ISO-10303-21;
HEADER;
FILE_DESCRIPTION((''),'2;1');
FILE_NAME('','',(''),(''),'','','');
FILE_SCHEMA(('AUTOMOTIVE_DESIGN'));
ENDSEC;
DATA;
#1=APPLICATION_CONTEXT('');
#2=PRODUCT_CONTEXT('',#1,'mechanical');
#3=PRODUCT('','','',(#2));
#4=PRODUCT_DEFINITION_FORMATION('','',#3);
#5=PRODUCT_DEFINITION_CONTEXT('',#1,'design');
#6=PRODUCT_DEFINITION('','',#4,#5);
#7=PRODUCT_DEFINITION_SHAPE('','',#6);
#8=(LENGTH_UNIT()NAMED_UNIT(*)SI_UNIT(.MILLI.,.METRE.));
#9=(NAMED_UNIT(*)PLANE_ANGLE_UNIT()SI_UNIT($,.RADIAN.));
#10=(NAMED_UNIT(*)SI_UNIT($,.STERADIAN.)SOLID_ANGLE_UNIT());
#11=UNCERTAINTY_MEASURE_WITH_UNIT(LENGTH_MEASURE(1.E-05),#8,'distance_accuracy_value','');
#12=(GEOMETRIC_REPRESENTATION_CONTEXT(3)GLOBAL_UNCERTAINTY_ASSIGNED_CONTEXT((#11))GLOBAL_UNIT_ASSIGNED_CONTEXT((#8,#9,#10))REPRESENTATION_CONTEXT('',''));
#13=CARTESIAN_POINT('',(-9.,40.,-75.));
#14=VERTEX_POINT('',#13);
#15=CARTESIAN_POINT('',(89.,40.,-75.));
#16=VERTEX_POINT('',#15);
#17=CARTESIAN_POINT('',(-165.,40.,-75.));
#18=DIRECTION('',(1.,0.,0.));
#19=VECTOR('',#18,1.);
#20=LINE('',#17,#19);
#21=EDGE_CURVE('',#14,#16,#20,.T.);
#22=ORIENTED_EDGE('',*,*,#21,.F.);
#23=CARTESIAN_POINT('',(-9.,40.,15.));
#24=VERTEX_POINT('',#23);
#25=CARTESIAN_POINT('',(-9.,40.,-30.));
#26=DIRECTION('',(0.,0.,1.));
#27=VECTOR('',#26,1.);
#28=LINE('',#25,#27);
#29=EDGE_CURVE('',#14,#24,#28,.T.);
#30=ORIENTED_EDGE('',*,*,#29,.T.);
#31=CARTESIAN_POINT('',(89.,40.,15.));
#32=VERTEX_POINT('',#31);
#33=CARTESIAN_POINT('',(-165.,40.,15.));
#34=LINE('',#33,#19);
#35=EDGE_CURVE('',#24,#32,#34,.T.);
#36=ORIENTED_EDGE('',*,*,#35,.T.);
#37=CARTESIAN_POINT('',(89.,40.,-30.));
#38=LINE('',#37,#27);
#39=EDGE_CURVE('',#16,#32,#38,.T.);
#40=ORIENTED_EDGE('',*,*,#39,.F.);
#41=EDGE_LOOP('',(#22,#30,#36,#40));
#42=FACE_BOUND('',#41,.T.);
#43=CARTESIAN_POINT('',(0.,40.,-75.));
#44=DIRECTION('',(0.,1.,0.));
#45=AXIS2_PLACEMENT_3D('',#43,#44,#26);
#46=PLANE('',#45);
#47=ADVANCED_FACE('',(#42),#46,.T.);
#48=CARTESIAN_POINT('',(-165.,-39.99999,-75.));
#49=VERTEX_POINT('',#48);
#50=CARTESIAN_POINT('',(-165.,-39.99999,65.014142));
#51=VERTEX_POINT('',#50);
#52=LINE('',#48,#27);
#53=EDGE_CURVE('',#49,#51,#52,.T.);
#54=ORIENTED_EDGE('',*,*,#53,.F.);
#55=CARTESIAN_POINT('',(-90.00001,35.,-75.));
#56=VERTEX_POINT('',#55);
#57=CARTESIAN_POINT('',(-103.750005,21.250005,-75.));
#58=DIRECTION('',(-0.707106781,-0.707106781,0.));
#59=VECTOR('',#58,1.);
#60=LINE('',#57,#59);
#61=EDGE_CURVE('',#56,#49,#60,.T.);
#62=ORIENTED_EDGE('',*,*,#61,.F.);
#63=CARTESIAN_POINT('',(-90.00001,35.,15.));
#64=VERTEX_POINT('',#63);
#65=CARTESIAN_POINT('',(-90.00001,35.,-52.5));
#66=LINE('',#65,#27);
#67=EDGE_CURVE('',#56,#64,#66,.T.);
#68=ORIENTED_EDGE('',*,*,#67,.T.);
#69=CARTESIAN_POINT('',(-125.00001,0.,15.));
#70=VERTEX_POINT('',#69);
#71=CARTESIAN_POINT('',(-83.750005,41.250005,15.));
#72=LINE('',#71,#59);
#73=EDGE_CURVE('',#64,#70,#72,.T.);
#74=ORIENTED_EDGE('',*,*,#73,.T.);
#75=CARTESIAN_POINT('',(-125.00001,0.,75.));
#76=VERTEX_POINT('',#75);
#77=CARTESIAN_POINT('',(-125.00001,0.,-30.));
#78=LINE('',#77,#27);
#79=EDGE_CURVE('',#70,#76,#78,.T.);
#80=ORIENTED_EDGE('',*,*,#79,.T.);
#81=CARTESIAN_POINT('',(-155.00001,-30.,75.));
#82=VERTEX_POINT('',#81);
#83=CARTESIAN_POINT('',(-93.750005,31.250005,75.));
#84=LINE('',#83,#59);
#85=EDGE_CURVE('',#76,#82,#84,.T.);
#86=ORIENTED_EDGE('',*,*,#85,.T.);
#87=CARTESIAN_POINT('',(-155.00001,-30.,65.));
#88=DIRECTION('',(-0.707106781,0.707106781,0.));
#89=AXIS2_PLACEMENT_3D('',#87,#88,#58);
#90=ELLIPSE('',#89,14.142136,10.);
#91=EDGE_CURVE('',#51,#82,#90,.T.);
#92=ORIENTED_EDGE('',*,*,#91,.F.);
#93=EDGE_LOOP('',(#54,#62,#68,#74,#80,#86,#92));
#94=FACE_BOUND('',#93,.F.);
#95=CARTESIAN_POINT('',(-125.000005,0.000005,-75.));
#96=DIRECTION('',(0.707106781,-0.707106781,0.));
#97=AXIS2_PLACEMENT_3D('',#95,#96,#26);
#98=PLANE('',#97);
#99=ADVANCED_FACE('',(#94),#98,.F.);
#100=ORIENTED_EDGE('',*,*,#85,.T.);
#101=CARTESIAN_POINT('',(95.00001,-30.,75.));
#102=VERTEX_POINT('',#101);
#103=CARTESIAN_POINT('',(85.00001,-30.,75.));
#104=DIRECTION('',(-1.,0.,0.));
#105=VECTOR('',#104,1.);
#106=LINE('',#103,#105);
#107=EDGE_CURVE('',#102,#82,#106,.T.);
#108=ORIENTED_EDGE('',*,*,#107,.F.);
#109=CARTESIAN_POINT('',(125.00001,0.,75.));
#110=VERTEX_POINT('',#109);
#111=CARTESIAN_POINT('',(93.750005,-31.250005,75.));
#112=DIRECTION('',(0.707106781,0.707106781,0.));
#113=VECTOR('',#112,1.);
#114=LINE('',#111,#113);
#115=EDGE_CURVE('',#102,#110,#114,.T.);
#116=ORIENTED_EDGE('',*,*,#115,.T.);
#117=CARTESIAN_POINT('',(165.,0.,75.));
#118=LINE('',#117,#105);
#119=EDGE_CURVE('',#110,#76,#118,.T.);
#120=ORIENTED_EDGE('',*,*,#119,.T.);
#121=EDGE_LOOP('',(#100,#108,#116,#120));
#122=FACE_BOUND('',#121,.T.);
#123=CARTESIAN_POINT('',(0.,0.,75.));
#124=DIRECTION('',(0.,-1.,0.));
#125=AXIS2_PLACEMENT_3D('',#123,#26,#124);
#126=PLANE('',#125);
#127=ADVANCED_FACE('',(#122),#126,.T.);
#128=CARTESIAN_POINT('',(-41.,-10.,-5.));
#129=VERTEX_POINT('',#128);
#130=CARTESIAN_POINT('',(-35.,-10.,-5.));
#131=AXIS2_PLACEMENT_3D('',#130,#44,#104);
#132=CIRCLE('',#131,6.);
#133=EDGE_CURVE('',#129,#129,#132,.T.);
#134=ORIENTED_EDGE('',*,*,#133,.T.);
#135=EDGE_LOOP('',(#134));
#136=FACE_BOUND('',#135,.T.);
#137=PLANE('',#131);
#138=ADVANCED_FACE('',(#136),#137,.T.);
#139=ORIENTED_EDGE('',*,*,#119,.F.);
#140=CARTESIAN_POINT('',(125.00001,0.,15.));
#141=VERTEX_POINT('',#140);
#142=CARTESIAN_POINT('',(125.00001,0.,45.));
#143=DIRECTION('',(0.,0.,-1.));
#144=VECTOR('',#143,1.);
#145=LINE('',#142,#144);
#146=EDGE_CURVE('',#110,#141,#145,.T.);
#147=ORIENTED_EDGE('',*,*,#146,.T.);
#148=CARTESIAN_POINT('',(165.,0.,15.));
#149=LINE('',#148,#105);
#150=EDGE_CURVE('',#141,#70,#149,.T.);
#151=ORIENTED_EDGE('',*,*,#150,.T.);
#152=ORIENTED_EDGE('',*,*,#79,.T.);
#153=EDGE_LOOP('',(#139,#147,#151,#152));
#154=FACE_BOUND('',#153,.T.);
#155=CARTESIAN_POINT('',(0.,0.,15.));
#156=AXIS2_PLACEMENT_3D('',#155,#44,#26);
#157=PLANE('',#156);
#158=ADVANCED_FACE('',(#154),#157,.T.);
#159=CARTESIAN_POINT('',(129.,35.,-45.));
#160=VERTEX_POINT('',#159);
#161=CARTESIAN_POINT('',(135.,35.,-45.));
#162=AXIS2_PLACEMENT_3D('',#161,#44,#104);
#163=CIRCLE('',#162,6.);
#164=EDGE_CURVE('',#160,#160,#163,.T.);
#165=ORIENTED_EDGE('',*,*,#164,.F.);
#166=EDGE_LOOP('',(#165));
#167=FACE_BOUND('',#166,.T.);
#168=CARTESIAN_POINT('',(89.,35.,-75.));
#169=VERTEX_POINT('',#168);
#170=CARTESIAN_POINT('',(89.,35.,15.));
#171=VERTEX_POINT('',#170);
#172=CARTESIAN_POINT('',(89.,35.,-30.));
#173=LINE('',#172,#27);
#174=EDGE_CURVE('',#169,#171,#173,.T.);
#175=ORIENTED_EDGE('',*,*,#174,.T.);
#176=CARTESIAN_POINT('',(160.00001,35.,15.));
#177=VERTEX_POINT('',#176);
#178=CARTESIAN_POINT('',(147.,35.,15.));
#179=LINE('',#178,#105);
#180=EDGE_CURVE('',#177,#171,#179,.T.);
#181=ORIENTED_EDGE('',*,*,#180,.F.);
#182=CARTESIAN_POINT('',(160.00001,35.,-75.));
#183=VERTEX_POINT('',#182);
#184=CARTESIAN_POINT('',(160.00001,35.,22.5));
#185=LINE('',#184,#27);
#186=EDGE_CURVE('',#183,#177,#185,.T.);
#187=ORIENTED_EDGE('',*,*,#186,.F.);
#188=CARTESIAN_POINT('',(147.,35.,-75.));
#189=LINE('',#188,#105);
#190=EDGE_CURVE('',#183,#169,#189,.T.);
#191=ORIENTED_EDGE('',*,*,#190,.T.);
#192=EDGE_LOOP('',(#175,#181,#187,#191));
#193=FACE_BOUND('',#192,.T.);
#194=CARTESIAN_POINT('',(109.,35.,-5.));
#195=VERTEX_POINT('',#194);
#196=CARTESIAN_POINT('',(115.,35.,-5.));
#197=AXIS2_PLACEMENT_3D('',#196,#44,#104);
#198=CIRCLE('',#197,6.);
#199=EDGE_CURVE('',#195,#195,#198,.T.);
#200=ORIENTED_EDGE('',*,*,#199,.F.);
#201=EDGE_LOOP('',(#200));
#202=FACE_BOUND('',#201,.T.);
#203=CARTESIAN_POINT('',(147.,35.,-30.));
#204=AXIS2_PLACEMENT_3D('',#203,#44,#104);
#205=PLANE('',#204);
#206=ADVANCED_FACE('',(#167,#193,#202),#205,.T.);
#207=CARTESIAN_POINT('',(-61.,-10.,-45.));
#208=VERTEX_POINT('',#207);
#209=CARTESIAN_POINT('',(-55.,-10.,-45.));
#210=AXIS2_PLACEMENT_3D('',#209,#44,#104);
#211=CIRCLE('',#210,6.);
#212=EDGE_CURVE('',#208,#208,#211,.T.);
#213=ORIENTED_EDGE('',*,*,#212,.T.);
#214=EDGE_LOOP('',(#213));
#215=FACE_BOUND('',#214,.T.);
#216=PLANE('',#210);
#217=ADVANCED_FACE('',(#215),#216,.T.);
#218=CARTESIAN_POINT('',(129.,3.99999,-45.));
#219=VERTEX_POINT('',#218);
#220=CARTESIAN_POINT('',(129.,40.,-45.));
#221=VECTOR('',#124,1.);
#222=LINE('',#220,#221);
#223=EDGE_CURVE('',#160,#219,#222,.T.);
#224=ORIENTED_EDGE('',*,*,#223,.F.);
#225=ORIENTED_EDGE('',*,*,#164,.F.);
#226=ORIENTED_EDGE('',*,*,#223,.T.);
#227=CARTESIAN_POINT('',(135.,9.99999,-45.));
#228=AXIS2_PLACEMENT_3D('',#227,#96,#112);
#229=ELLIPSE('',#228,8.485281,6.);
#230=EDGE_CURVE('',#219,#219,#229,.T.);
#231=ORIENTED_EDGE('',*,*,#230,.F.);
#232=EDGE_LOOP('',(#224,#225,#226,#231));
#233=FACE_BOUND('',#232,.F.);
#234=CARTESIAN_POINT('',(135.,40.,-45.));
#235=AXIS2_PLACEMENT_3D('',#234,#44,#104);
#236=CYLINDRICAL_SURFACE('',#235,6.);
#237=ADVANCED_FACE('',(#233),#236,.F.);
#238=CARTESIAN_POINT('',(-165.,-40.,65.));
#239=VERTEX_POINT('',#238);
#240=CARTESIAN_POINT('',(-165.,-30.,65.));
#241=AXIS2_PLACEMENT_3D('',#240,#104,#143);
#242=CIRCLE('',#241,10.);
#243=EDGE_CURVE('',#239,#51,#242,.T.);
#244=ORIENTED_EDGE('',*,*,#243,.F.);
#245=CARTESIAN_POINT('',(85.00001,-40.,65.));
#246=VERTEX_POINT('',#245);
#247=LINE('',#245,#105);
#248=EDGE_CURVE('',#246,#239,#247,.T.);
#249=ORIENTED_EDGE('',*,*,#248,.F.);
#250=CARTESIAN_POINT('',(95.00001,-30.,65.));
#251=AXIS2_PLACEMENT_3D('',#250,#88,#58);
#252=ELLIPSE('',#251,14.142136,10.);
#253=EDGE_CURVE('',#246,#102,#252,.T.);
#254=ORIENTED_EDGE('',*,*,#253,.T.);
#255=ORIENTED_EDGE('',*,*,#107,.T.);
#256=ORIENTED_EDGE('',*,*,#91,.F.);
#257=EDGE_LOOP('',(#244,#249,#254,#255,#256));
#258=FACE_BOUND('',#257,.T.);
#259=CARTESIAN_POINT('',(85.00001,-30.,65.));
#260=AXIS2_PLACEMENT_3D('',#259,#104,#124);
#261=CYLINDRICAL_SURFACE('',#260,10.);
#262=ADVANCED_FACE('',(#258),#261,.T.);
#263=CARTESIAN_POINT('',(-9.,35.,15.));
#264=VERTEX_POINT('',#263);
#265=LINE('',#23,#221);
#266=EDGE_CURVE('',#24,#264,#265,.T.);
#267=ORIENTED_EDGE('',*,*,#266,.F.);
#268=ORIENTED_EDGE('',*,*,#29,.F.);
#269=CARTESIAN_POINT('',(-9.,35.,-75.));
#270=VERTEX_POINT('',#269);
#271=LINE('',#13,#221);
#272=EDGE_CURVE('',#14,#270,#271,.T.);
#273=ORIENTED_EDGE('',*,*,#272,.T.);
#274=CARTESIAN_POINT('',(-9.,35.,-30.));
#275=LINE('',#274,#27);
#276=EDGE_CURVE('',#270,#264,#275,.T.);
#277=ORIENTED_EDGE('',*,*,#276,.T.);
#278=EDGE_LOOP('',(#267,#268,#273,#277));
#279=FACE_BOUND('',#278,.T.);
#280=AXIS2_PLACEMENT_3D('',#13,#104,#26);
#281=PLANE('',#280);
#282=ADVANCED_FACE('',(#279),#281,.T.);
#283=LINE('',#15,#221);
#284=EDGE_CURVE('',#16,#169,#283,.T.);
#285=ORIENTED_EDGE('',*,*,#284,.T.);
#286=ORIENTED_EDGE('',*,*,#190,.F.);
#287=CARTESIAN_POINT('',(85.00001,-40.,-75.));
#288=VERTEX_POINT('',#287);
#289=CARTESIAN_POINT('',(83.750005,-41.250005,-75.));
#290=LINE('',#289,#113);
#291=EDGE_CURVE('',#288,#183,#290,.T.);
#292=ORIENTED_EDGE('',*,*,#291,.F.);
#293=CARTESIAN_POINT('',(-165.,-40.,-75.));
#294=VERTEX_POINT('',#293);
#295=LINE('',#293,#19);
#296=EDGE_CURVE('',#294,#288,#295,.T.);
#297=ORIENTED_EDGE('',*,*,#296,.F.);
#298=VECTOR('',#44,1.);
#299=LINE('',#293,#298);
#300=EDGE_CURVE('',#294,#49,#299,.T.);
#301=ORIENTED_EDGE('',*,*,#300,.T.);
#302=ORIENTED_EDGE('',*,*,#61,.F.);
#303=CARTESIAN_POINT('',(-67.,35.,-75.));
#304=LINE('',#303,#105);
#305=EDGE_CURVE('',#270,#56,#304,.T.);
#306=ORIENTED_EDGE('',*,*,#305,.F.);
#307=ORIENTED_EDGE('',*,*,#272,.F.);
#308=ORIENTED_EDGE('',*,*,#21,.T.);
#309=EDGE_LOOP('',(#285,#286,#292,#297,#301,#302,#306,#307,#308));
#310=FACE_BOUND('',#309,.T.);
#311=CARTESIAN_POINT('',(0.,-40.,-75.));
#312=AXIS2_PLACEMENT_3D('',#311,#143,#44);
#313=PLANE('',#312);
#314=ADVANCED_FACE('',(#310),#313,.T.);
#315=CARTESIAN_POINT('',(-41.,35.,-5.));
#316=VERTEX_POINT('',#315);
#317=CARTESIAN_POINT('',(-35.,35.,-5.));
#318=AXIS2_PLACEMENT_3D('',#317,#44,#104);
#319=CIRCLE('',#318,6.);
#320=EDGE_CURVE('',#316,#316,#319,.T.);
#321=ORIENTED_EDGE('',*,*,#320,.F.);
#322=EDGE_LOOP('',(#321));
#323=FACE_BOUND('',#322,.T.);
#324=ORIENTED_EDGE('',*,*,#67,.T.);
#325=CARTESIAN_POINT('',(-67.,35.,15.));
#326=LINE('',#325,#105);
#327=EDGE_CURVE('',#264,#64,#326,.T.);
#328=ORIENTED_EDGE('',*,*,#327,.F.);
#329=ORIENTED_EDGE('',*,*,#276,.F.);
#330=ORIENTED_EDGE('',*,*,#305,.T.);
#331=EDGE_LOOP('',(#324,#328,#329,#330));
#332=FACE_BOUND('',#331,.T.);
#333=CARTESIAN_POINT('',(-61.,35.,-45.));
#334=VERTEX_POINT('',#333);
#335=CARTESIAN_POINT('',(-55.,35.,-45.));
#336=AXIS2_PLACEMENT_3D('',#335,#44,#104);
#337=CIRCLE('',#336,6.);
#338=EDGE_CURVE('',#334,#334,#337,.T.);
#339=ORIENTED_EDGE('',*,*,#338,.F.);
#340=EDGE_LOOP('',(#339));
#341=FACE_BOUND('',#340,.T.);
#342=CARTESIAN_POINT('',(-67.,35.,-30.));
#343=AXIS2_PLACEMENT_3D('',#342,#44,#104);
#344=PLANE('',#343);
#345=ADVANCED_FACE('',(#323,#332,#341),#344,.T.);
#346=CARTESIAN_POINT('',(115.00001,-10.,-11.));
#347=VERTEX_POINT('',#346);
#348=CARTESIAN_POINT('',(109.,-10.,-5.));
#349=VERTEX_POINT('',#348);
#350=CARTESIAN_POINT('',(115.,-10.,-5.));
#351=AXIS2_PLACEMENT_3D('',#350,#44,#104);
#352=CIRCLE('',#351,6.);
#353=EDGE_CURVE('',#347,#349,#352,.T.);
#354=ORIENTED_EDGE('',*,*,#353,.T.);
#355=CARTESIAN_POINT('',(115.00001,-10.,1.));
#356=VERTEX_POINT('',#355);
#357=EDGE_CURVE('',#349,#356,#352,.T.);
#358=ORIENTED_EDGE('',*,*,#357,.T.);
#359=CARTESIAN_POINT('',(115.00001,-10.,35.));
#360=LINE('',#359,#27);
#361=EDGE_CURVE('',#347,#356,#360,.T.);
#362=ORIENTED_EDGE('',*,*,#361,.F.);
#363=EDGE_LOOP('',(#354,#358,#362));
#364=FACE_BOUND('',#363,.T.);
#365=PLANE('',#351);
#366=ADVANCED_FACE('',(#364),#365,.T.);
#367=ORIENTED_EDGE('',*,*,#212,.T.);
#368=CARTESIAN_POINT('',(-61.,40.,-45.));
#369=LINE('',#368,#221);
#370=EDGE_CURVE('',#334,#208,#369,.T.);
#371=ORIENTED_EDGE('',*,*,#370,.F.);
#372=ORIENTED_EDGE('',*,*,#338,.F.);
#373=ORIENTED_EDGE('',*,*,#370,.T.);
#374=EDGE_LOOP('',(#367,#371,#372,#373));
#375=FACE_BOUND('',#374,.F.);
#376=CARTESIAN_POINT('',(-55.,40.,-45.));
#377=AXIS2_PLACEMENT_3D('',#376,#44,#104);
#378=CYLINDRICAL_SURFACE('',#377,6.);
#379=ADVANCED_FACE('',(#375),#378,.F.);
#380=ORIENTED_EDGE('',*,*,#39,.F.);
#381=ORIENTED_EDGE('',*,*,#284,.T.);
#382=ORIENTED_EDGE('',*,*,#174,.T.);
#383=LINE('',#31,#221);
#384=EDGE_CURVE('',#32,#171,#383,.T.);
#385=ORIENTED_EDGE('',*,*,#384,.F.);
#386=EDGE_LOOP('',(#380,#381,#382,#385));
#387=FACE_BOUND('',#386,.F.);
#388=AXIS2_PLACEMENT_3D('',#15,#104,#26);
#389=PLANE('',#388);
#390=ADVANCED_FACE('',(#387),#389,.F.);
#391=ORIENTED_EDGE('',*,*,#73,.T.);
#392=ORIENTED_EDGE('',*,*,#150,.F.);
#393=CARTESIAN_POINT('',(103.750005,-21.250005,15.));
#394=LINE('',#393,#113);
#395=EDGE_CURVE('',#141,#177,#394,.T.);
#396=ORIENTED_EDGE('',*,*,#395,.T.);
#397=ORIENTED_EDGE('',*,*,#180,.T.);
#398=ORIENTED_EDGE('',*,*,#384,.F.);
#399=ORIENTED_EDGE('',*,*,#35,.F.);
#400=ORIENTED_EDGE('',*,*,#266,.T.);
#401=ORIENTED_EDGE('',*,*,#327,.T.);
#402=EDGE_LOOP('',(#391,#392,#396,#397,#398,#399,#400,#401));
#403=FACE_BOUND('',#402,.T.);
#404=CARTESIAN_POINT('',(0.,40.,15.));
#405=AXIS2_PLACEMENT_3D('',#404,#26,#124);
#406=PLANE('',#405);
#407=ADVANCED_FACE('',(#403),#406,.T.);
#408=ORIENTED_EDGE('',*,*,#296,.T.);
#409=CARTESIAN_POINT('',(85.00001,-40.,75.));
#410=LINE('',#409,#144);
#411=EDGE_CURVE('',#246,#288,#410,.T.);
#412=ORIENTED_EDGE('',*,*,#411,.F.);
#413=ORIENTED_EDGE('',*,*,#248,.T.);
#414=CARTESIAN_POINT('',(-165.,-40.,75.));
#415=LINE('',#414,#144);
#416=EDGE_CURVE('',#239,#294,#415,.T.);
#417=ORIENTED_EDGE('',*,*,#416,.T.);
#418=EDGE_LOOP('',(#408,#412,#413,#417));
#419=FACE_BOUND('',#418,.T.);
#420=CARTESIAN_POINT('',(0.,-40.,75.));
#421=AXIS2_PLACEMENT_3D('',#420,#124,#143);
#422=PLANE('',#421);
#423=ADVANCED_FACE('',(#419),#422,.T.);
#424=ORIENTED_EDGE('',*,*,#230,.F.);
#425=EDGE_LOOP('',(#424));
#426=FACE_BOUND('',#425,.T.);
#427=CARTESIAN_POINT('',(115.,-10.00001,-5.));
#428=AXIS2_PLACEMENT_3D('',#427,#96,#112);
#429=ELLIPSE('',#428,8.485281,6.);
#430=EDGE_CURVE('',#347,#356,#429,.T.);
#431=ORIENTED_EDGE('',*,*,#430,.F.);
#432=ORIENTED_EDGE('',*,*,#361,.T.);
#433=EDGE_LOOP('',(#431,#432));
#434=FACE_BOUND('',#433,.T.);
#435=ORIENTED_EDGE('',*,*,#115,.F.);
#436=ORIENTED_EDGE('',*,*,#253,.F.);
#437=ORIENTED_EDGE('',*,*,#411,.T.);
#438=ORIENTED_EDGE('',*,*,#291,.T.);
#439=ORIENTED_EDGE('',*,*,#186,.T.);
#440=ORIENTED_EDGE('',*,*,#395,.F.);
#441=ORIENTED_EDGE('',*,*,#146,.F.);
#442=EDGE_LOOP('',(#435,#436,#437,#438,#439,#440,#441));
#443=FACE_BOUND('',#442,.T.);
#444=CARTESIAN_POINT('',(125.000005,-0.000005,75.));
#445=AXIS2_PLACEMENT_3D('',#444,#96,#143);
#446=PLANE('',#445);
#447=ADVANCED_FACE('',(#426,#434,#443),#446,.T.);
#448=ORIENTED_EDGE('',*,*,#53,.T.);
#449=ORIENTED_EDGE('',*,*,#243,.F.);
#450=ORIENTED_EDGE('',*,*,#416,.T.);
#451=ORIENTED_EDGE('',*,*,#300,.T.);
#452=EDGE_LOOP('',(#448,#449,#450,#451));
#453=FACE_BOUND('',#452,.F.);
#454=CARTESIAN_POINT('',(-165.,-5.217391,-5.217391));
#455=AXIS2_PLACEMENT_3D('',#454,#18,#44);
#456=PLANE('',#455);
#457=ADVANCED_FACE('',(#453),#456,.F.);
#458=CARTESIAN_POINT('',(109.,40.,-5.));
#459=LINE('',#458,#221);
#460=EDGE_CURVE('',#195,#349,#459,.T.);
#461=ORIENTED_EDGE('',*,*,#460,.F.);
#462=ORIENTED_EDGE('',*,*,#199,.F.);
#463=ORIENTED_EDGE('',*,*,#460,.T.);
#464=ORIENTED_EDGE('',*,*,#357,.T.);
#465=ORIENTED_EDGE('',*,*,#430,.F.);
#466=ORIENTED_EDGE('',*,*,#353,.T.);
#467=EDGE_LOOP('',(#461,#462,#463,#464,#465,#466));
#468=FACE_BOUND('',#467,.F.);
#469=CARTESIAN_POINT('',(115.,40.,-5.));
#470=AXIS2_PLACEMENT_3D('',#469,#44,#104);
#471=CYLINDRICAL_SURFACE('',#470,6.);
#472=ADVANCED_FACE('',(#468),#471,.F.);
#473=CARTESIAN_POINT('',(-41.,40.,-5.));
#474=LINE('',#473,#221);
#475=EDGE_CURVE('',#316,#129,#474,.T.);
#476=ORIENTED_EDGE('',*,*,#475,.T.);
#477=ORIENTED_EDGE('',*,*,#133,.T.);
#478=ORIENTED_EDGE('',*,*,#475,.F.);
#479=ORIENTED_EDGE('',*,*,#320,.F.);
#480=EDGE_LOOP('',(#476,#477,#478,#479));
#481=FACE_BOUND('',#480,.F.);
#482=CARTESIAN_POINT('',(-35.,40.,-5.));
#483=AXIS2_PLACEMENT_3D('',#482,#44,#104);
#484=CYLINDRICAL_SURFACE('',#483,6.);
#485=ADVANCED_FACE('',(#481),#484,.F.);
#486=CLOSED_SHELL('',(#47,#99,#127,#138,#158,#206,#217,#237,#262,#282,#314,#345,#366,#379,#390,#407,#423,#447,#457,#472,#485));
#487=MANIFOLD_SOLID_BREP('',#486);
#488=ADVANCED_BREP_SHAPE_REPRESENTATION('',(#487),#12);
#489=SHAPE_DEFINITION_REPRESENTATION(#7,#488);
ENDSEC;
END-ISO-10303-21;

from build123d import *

# Parameters (mm, degrees)
F3_DEPTH = 165
F4_SIZE  = 79.99999
F5_R     = 6
F6_DEPTH = 50
F7_W     = 116
F7_H     = 90
F8_DEPTH = 5
F9_R     = 10


# Not quite as in the source:
# - a fillet or chamfer is up to 0.001 mm smaller than in the source, because OpenCascade refuses the exact size


with BuildPart() as f3:
    # F2 (on Right) → F3 (new body, symmetric)
    with BuildSketch(Plane.YZ):
        Polygon((-40, 75), (-40, -75), (40, -75), (40, 15), (0, 15), (0, 75), align=None)
    extrude(amount=F3_DEPTH, both=True)

    # F4 (size 80 in the source; OpenCascade refuses exactly that, so slightly less here)
    f4_edges = [f3.edges().sort_by_distance(p)[0] for p in [
        (-165, 40, -30),
        (165, -40, 0),
    ]]
    chamfer(f4_edges, length=F4_SIZE)

    # F5 (on face) → F6 (cut)
    with BuildSketch(Plane(origin=(0, 40, 0), x_dir=(-1, 0, 0), z_dir=(0, 1, 0))):
        with Locations((35, -5)):
            Circle(F5_R)
        with Locations((55, -45)):
            Circle(F5_R)
        with Locations((-115, -5)):
            Circle(F5_R)
        with Locations((-135, -45)):
            Circle(F5_R)
    extrude(amount=-F6_DEPTH, mode=Mode.SUBTRACT)

    # F7 (on face) → F8 (cut)
    with BuildSketch(Plane(origin=(0, 40, 0), x_dir=(-1, 0, 0), z_dir=(0, 1, 0))):
        with Locations((67, -30)):
            Rectangle(F7_W, F7_H)
        with Locations((-147, -30)):
            Rectangle(F7_W, F7_H)
    extrude(amount=-F8_DEPTH, mode=Mode.SUBTRACT)

    # F9
    f9_edges = [f3.edges().sort_by_distance(p)[0] for p in [
        (-39.999995, -40, 75),
    ]]
    fillet(f9_edges, radius=F9_R)


solid = f3.part
